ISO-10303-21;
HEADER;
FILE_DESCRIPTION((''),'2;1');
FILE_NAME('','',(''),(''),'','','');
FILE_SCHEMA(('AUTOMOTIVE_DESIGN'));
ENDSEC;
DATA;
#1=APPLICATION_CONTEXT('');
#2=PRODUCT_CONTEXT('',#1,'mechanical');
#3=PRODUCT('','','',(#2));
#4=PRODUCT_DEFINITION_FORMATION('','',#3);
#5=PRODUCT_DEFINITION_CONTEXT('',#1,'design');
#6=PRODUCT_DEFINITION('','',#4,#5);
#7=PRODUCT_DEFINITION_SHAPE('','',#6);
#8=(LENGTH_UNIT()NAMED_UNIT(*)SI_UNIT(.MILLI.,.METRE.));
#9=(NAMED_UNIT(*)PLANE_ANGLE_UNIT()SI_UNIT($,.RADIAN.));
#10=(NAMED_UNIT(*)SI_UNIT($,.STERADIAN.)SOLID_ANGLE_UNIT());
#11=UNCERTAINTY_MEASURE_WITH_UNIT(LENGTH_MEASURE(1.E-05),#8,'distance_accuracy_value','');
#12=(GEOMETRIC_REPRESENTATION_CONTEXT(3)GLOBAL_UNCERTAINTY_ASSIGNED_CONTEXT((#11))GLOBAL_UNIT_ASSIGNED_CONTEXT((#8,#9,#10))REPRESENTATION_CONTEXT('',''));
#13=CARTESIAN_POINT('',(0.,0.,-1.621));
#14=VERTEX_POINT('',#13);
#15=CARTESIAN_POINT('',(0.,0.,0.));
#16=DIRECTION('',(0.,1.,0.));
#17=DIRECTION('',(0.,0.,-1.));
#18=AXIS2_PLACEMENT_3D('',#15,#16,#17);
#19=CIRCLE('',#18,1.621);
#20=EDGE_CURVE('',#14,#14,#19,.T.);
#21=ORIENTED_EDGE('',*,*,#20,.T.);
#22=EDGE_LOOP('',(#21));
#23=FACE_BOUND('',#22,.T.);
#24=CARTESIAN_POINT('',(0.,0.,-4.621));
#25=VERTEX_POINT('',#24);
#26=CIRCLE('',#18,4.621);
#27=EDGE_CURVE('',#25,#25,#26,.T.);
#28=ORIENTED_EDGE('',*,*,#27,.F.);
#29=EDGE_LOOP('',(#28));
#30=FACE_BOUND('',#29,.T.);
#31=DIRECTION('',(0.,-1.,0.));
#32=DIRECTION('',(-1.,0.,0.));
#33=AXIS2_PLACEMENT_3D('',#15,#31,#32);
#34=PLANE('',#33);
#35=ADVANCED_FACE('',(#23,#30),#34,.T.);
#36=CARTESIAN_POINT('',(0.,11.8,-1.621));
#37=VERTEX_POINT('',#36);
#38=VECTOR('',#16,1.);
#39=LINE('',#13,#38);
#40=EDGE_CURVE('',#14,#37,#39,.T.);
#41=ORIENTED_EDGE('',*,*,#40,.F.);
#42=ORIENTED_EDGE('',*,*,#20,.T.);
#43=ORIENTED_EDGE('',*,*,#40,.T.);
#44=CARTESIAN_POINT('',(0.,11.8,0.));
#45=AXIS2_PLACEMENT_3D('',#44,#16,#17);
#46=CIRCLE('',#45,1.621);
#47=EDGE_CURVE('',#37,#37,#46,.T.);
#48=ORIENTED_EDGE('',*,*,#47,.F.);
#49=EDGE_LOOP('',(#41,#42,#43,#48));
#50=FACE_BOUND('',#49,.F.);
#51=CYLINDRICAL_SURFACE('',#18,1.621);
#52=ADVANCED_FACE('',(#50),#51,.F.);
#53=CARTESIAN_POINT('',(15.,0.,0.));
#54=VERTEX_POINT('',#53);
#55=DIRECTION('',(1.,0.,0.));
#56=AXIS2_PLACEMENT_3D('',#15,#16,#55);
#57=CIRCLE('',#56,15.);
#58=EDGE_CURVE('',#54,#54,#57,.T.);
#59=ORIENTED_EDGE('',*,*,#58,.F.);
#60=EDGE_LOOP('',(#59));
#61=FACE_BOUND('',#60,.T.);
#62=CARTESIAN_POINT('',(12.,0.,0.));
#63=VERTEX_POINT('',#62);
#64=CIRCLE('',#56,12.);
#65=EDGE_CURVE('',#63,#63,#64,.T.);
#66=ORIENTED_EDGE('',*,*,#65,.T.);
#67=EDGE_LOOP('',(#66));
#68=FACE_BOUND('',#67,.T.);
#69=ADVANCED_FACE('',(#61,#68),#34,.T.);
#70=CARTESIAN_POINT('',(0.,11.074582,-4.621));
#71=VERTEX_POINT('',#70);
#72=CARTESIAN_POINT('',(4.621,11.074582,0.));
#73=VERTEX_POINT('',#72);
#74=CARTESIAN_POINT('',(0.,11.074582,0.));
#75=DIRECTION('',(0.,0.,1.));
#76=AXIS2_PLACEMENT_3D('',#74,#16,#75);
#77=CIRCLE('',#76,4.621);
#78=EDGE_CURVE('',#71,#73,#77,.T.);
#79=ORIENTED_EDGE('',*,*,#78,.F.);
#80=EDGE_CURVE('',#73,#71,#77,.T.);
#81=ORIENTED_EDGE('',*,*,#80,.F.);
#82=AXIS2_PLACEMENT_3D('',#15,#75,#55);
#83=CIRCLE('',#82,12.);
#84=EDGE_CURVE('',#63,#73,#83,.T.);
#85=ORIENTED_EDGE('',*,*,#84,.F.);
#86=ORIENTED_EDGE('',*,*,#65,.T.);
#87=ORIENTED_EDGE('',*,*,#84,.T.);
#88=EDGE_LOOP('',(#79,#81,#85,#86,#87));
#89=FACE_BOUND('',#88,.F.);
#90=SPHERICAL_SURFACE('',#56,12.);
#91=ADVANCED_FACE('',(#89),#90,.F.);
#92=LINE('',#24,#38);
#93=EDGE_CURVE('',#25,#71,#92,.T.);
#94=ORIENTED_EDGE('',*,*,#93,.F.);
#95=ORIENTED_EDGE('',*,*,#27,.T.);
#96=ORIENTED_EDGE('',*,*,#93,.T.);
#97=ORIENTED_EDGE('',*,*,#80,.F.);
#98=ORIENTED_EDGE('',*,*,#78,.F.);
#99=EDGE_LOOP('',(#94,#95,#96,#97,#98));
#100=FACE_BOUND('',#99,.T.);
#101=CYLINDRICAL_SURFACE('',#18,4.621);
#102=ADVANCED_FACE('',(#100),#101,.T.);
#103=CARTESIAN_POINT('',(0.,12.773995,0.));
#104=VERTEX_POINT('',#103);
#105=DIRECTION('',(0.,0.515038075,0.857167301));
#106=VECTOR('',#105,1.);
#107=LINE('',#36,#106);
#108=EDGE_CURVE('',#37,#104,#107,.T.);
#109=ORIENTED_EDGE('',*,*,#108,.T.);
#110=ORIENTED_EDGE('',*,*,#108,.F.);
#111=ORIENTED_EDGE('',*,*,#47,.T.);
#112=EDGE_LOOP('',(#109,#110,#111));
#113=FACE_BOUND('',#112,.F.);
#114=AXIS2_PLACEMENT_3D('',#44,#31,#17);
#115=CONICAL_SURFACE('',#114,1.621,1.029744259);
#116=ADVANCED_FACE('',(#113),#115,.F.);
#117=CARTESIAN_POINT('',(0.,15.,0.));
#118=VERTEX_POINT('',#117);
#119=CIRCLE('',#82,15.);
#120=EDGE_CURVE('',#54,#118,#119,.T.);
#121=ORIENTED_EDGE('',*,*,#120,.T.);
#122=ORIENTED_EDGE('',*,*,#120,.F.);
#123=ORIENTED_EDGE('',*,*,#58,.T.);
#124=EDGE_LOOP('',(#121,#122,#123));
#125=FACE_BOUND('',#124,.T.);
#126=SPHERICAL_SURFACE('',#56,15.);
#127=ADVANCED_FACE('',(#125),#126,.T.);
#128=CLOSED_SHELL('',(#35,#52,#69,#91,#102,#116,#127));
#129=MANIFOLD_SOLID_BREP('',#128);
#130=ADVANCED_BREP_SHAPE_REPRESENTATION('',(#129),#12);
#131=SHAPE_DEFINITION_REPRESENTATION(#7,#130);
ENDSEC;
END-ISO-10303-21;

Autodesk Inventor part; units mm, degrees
ref_plane "YZ Plane" through (0, 0, 0) normal (1, 0, 0) x (0, 1, 0)
ref_plane "XZ Plane" through (0, 0, 0) normal (0, 1, 0) x (-1, 0, 0)
ref_plane "XY Plane" through (0, 0, 0) normal (0, 0, 1) x (1, 0, 0)
sketch "Sketch1" plane through (0, 0, 0) normal (0, 0, 1) x (1, 0, 0)
  line L0 (0, 0) -> (0, 15)
  line L1 (0, 0) -> (15, 0)
  arc A0 (15, 0) -> (0, 15) centre (0, 0) ccw
  line L2 (0, -3.6213) -> (0, 21.7279) projected
  dimension "d2" = 15
revolve "Revolution1" add sketch "Sketch1" angle 360 about axis through (0, -10, 0) along (0, 1, 0)
sketch "Sketch4" plane through (0, 0, 0) normal (0, -1, 0) x (1, 0, 0)
  point P0 (0, 0)
  point P1 (0, 0)
hole "Hole2" at (0, 0, 0) direction (0, 1, 0) diameter 3.242 depth 11.8 tip angle 118 thread size "M4x0.7" class "6H" standard "ANSI Metric M Profile"
shell "Shell2" thickness 3 removed faces 1 at (10.3911, 0, 1.2617)
properties part number "Ball_Upper Half" material "Nylon 6/6"
